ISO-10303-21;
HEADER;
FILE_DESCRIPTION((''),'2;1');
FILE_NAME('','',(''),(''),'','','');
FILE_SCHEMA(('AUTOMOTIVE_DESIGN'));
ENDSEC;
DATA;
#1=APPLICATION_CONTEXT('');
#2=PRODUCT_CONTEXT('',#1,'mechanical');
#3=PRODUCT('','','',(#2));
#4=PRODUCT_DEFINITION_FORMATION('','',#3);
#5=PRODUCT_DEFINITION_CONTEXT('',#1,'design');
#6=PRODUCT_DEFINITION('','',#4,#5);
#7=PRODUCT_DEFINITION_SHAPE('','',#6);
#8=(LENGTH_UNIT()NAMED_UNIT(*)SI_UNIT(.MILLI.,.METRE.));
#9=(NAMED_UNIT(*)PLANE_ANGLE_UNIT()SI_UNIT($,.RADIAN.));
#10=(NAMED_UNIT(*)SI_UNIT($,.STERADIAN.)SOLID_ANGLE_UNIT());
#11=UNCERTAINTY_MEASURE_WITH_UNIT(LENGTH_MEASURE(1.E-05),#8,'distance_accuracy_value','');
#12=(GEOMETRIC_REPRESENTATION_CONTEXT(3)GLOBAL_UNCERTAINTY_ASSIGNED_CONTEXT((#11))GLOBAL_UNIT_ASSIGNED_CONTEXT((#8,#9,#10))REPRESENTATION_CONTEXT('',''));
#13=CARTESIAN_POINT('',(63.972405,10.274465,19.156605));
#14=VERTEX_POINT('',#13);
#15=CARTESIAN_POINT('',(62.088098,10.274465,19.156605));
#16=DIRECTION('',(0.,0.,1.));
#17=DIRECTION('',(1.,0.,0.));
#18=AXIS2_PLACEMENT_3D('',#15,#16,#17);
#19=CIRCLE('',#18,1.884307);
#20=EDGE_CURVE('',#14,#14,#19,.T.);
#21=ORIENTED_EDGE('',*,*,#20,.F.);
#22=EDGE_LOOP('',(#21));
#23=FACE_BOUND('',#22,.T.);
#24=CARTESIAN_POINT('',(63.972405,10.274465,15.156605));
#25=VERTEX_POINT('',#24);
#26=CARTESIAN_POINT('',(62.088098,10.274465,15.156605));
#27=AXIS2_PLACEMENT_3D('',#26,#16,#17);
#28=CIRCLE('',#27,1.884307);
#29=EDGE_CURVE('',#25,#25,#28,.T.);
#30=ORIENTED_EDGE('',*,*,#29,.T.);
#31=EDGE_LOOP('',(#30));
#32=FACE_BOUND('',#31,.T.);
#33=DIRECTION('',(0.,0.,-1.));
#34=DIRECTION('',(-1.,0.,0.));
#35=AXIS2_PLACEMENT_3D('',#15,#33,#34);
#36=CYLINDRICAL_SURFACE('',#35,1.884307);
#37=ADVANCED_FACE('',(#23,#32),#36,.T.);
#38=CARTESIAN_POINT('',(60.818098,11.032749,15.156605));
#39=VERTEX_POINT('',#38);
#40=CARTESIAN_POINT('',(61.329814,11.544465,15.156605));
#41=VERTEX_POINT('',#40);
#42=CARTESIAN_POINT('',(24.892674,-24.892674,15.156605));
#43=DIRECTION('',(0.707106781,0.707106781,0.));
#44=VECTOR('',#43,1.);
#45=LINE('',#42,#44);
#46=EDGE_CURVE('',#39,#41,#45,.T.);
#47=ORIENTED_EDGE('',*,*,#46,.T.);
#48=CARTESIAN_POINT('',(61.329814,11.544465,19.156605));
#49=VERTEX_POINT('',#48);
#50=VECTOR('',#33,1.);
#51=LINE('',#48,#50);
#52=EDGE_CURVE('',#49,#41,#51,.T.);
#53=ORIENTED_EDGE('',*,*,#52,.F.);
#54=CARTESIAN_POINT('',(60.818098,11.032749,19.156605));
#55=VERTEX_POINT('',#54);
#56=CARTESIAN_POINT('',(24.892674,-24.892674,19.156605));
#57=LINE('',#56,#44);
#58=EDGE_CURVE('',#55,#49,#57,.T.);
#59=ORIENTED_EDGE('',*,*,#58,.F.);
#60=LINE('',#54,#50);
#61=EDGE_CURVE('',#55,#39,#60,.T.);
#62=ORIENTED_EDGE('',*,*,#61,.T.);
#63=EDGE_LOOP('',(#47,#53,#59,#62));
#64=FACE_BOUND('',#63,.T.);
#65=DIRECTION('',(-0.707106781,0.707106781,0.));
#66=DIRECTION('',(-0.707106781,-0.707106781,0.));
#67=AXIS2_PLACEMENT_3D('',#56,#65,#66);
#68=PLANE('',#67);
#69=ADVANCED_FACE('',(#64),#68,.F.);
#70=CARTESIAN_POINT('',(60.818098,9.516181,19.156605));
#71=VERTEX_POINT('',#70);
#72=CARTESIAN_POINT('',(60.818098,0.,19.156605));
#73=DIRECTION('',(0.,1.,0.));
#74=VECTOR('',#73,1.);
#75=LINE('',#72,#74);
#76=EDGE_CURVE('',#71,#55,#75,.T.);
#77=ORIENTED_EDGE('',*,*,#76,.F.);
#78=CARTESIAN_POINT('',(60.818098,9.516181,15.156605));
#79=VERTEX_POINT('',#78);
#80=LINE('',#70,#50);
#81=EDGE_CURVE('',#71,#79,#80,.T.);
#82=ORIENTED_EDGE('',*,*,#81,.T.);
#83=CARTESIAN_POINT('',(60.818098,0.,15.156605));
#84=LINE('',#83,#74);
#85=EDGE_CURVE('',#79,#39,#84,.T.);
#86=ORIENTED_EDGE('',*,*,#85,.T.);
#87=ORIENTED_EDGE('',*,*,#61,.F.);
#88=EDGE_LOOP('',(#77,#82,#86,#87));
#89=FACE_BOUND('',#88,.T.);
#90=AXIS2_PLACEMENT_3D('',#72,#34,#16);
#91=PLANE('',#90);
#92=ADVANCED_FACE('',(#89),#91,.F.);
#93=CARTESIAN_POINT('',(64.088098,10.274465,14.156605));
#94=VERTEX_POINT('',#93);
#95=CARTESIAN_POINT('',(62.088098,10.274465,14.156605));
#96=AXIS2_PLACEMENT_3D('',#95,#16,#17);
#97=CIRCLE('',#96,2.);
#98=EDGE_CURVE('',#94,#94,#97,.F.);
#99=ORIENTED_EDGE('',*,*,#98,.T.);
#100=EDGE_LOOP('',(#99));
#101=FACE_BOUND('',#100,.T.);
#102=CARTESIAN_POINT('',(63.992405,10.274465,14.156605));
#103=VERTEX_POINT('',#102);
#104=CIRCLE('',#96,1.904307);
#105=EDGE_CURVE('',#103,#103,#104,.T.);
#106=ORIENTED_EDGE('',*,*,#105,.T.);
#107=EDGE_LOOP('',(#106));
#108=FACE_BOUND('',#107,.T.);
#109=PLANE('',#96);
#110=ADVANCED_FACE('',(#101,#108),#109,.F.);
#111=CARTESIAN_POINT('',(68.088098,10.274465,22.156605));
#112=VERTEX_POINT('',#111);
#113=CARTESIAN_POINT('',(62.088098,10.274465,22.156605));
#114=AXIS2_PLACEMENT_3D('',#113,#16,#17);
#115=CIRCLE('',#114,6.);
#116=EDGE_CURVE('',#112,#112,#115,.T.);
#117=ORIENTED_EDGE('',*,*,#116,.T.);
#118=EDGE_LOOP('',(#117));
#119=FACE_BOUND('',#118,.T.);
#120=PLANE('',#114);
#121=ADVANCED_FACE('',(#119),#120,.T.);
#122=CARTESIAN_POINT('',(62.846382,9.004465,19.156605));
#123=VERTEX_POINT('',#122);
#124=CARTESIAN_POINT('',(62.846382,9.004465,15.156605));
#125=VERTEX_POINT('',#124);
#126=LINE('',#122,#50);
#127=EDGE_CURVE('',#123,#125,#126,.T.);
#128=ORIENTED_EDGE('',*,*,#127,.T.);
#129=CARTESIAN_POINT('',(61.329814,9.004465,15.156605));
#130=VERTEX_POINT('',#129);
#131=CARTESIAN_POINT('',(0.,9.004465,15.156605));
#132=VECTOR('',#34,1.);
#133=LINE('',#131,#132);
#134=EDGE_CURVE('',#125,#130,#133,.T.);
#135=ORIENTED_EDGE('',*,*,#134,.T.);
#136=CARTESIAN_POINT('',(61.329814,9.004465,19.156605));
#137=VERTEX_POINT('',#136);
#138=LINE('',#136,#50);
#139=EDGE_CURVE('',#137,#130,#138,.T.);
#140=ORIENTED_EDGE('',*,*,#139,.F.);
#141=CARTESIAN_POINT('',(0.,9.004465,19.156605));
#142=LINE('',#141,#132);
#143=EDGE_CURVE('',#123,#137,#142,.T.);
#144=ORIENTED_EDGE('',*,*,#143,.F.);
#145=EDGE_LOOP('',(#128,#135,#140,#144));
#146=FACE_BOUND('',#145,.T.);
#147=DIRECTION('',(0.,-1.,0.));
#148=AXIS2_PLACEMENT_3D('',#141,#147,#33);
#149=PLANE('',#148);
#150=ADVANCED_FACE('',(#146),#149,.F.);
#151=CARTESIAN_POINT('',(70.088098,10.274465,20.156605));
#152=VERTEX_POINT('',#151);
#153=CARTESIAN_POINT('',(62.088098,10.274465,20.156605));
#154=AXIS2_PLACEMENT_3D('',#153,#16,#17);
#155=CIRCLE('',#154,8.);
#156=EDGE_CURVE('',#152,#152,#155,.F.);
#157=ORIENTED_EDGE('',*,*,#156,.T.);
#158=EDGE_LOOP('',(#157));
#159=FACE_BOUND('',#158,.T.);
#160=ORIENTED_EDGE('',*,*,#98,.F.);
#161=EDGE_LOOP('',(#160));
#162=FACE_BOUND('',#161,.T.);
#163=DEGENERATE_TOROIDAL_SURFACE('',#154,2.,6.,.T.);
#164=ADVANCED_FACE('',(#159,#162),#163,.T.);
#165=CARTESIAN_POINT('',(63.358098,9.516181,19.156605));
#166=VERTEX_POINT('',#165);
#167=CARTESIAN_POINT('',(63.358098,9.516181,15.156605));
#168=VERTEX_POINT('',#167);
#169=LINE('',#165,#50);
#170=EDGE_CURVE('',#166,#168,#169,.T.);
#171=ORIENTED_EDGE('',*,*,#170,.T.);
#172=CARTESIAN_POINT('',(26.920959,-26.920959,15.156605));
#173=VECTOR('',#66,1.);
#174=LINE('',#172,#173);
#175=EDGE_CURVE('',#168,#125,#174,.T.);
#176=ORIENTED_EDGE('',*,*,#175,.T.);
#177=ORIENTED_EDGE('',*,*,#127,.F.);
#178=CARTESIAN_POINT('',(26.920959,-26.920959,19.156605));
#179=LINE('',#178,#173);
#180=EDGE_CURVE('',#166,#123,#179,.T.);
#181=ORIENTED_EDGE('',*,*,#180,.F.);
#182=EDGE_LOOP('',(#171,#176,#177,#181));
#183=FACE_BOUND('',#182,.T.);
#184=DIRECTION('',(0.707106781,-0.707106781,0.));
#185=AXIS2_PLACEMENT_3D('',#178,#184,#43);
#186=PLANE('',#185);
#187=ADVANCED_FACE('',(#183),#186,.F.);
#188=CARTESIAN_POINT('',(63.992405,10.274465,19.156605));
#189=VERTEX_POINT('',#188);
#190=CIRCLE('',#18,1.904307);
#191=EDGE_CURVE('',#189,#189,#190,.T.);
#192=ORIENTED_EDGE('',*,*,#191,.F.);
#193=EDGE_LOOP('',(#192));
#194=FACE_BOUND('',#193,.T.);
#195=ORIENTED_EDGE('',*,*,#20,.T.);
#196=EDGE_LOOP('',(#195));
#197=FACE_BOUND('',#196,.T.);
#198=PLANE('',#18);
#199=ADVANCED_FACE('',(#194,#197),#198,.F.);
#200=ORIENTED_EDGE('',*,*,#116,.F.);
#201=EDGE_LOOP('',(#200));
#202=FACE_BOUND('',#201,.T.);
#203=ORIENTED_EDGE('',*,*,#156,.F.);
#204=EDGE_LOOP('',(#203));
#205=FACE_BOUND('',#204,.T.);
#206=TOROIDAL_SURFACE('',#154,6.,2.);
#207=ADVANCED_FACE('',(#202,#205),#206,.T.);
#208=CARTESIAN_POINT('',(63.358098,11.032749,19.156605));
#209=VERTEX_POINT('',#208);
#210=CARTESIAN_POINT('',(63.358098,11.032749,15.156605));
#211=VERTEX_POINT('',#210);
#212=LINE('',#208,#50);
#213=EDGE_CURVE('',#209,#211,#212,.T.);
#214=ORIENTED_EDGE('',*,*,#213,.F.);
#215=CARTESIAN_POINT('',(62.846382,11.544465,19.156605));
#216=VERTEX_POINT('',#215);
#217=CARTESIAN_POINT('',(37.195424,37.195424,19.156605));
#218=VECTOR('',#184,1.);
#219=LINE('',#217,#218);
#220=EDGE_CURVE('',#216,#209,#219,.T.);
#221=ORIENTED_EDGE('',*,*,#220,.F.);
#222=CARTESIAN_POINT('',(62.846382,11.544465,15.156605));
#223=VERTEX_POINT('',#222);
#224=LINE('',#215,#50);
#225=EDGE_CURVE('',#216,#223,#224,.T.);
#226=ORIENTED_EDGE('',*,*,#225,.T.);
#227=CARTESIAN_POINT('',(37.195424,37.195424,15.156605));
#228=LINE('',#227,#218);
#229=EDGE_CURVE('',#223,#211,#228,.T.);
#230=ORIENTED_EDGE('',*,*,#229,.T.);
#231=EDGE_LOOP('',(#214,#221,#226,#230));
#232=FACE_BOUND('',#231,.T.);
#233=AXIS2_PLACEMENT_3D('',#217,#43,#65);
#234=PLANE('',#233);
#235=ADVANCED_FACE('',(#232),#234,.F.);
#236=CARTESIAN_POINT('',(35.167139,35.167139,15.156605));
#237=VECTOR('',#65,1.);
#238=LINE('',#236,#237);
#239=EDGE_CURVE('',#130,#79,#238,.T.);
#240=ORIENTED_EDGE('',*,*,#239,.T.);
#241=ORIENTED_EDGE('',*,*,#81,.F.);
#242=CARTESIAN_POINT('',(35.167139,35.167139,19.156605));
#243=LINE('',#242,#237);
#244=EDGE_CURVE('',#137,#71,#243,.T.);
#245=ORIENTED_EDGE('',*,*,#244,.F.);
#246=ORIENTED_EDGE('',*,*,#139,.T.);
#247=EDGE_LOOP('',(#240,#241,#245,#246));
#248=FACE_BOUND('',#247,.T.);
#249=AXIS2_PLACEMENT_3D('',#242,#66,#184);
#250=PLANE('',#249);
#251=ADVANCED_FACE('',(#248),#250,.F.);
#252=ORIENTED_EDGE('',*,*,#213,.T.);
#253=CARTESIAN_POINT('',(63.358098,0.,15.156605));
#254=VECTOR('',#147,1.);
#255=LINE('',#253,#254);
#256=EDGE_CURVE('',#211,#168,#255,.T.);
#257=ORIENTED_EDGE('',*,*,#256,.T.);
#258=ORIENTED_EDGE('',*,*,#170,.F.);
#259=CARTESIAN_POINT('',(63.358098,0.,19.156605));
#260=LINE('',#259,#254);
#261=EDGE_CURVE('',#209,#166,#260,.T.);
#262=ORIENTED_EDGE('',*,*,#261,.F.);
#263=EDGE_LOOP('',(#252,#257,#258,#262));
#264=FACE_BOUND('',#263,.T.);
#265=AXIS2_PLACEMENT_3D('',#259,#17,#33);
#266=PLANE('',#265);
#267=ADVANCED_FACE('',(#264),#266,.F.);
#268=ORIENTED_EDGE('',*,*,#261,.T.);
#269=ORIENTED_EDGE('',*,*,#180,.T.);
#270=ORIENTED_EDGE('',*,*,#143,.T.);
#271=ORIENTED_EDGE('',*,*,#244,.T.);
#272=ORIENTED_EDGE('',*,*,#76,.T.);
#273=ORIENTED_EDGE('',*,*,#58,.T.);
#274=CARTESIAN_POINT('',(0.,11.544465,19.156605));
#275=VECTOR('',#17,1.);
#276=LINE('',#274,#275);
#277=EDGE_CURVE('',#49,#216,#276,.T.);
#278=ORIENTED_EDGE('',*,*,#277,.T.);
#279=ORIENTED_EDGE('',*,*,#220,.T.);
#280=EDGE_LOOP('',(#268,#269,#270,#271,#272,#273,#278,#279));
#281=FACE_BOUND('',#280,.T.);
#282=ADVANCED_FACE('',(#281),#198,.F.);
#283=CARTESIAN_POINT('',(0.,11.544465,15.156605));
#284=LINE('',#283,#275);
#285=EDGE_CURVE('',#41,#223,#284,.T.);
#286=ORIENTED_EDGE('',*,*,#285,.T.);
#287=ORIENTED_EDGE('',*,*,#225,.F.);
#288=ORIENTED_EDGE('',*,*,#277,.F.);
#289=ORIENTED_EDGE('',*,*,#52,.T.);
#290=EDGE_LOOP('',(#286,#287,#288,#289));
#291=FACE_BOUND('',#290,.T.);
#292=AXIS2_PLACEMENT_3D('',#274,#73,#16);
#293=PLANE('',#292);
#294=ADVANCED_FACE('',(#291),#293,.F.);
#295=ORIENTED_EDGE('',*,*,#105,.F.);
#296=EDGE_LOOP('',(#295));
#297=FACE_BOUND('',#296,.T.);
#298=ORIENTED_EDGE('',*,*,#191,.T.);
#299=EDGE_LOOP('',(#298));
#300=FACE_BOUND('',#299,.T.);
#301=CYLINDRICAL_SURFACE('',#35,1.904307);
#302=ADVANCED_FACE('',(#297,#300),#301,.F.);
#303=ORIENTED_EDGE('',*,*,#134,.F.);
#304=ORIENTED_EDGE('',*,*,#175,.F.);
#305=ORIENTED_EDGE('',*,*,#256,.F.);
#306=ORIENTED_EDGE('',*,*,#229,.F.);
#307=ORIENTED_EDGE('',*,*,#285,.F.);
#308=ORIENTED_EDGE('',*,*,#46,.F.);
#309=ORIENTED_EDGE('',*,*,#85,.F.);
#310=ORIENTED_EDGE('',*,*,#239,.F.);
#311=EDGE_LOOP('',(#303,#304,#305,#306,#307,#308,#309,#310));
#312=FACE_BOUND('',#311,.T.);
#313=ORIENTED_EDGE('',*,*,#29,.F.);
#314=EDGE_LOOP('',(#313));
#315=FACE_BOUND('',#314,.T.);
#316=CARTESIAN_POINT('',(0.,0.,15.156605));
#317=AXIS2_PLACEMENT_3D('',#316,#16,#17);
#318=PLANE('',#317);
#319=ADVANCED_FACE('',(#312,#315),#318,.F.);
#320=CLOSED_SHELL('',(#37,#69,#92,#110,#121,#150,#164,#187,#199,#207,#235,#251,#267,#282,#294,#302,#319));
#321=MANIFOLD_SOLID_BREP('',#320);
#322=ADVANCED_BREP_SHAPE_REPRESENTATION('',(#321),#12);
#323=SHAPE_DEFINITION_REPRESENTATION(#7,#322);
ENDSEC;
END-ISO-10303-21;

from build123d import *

# Parameters (mm, degrees)
EXTRUDE_3_OUTLINE_R   = 8
EXTRUDE_3_OUTLINE_R_2 = 1.904306864
EXTRUDE_3_OUTLINE_R_3 = 1.884306864
EXTRUDE_3_DEPTH       = 4
EXTRUDE_START         = -1
SKETCH_4_3_R          = 8
SKETCH_4_3_R_2        = 1.904306864
EXTRUDE_4_DEPTH       = 1
SKETCH_5_R            = 8
EXTRUDE_5_DEPTH       = 3
FILLET_3_R            = 2
FILLET_4_R            = 6


# Read off the part's stored shape, not the designer's step: 凸台-拉伸3
with BuildPart() as part:
    # 凸台-拉伸3 outline → 凸台-拉伸3 (new body)
    # profile 1 of 2: a face of its own
    with BuildSketch(Plane.XY.offset(15.156605354)):
        with Locations((62.088098202, 10.274465036)):
            Circle(EXTRUDE_3_OUTLINE_R)
        with Locations((62.088098202, 10.274465036)):
            Circle(EXTRUDE_3_OUTLINE_R_2, mode=Mode.SUBTRACT)
    # profile 2 of 2: a face of its own
    with BuildSketch(Plane.XY.offset(15.156605354)):
        with Locations((62.088098202, 10.274465036)):
            Circle(EXTRUDE_3_OUTLINE_R_3)
        Polygon((62.846382474, 11.544465036), (63.358098202, 11.032749307), (63.358098202, 9.516180765), (62.846382474, 9.004465036), (61.329813931, 9.004465036), (60.818098202, 9.516180765), (60.818098202, 11.032749307), (61.329813931, 11.544465036), align=None, mode=Mode.SUBTRACT)
    extrude(amount=EXTRUDE_3_DEPTH)

    # 草图4<3> → 凸台-拉伸4 (add)
    with BuildSketch(Plane.XY.offset(15.156605354).offset(EXTRUDE_START)):
        with Locations((62.088098202, 10.274465036)):
            Circle(SKETCH_4_3_R)
        with Locations((62.088098202, 10.274465036)):
            Circle(SKETCH_4_3_R_2, mode=Mode.SUBTRACT)
    extrude(amount=EXTRUDE_4_DEPTH)

    # 草图5 → 凸台-拉伸5 (add)
    with BuildSketch(Plane.XY.offset(19.156605354)):
        with Locations((62.088098202, 10.274465036)):
            Circle(SKETCH_5_R)
    extrude(amount=EXTRUDE_5_DEPTH)

    # 圆角3
    fillet_3_edges = [part.edges().sort_by_distance(p)[0] for p in [
        (54.088098202, 10.274465036, 22.156605354),
    ]]
    fillet(fillet_3_edges, radius=FILLET_3_R)

    # 圆角4
    fillet_4_edges = [part.edges().sort_by_distance(p)[0] for p in [
        (54.088098202, 10.274465036, 14.156605354),
    ]]
    fillet(fillet_4_edges, radius=FILLET_4_R - 0.0001)  # a hair under: the kernel refuses the full size


solid = part.part
